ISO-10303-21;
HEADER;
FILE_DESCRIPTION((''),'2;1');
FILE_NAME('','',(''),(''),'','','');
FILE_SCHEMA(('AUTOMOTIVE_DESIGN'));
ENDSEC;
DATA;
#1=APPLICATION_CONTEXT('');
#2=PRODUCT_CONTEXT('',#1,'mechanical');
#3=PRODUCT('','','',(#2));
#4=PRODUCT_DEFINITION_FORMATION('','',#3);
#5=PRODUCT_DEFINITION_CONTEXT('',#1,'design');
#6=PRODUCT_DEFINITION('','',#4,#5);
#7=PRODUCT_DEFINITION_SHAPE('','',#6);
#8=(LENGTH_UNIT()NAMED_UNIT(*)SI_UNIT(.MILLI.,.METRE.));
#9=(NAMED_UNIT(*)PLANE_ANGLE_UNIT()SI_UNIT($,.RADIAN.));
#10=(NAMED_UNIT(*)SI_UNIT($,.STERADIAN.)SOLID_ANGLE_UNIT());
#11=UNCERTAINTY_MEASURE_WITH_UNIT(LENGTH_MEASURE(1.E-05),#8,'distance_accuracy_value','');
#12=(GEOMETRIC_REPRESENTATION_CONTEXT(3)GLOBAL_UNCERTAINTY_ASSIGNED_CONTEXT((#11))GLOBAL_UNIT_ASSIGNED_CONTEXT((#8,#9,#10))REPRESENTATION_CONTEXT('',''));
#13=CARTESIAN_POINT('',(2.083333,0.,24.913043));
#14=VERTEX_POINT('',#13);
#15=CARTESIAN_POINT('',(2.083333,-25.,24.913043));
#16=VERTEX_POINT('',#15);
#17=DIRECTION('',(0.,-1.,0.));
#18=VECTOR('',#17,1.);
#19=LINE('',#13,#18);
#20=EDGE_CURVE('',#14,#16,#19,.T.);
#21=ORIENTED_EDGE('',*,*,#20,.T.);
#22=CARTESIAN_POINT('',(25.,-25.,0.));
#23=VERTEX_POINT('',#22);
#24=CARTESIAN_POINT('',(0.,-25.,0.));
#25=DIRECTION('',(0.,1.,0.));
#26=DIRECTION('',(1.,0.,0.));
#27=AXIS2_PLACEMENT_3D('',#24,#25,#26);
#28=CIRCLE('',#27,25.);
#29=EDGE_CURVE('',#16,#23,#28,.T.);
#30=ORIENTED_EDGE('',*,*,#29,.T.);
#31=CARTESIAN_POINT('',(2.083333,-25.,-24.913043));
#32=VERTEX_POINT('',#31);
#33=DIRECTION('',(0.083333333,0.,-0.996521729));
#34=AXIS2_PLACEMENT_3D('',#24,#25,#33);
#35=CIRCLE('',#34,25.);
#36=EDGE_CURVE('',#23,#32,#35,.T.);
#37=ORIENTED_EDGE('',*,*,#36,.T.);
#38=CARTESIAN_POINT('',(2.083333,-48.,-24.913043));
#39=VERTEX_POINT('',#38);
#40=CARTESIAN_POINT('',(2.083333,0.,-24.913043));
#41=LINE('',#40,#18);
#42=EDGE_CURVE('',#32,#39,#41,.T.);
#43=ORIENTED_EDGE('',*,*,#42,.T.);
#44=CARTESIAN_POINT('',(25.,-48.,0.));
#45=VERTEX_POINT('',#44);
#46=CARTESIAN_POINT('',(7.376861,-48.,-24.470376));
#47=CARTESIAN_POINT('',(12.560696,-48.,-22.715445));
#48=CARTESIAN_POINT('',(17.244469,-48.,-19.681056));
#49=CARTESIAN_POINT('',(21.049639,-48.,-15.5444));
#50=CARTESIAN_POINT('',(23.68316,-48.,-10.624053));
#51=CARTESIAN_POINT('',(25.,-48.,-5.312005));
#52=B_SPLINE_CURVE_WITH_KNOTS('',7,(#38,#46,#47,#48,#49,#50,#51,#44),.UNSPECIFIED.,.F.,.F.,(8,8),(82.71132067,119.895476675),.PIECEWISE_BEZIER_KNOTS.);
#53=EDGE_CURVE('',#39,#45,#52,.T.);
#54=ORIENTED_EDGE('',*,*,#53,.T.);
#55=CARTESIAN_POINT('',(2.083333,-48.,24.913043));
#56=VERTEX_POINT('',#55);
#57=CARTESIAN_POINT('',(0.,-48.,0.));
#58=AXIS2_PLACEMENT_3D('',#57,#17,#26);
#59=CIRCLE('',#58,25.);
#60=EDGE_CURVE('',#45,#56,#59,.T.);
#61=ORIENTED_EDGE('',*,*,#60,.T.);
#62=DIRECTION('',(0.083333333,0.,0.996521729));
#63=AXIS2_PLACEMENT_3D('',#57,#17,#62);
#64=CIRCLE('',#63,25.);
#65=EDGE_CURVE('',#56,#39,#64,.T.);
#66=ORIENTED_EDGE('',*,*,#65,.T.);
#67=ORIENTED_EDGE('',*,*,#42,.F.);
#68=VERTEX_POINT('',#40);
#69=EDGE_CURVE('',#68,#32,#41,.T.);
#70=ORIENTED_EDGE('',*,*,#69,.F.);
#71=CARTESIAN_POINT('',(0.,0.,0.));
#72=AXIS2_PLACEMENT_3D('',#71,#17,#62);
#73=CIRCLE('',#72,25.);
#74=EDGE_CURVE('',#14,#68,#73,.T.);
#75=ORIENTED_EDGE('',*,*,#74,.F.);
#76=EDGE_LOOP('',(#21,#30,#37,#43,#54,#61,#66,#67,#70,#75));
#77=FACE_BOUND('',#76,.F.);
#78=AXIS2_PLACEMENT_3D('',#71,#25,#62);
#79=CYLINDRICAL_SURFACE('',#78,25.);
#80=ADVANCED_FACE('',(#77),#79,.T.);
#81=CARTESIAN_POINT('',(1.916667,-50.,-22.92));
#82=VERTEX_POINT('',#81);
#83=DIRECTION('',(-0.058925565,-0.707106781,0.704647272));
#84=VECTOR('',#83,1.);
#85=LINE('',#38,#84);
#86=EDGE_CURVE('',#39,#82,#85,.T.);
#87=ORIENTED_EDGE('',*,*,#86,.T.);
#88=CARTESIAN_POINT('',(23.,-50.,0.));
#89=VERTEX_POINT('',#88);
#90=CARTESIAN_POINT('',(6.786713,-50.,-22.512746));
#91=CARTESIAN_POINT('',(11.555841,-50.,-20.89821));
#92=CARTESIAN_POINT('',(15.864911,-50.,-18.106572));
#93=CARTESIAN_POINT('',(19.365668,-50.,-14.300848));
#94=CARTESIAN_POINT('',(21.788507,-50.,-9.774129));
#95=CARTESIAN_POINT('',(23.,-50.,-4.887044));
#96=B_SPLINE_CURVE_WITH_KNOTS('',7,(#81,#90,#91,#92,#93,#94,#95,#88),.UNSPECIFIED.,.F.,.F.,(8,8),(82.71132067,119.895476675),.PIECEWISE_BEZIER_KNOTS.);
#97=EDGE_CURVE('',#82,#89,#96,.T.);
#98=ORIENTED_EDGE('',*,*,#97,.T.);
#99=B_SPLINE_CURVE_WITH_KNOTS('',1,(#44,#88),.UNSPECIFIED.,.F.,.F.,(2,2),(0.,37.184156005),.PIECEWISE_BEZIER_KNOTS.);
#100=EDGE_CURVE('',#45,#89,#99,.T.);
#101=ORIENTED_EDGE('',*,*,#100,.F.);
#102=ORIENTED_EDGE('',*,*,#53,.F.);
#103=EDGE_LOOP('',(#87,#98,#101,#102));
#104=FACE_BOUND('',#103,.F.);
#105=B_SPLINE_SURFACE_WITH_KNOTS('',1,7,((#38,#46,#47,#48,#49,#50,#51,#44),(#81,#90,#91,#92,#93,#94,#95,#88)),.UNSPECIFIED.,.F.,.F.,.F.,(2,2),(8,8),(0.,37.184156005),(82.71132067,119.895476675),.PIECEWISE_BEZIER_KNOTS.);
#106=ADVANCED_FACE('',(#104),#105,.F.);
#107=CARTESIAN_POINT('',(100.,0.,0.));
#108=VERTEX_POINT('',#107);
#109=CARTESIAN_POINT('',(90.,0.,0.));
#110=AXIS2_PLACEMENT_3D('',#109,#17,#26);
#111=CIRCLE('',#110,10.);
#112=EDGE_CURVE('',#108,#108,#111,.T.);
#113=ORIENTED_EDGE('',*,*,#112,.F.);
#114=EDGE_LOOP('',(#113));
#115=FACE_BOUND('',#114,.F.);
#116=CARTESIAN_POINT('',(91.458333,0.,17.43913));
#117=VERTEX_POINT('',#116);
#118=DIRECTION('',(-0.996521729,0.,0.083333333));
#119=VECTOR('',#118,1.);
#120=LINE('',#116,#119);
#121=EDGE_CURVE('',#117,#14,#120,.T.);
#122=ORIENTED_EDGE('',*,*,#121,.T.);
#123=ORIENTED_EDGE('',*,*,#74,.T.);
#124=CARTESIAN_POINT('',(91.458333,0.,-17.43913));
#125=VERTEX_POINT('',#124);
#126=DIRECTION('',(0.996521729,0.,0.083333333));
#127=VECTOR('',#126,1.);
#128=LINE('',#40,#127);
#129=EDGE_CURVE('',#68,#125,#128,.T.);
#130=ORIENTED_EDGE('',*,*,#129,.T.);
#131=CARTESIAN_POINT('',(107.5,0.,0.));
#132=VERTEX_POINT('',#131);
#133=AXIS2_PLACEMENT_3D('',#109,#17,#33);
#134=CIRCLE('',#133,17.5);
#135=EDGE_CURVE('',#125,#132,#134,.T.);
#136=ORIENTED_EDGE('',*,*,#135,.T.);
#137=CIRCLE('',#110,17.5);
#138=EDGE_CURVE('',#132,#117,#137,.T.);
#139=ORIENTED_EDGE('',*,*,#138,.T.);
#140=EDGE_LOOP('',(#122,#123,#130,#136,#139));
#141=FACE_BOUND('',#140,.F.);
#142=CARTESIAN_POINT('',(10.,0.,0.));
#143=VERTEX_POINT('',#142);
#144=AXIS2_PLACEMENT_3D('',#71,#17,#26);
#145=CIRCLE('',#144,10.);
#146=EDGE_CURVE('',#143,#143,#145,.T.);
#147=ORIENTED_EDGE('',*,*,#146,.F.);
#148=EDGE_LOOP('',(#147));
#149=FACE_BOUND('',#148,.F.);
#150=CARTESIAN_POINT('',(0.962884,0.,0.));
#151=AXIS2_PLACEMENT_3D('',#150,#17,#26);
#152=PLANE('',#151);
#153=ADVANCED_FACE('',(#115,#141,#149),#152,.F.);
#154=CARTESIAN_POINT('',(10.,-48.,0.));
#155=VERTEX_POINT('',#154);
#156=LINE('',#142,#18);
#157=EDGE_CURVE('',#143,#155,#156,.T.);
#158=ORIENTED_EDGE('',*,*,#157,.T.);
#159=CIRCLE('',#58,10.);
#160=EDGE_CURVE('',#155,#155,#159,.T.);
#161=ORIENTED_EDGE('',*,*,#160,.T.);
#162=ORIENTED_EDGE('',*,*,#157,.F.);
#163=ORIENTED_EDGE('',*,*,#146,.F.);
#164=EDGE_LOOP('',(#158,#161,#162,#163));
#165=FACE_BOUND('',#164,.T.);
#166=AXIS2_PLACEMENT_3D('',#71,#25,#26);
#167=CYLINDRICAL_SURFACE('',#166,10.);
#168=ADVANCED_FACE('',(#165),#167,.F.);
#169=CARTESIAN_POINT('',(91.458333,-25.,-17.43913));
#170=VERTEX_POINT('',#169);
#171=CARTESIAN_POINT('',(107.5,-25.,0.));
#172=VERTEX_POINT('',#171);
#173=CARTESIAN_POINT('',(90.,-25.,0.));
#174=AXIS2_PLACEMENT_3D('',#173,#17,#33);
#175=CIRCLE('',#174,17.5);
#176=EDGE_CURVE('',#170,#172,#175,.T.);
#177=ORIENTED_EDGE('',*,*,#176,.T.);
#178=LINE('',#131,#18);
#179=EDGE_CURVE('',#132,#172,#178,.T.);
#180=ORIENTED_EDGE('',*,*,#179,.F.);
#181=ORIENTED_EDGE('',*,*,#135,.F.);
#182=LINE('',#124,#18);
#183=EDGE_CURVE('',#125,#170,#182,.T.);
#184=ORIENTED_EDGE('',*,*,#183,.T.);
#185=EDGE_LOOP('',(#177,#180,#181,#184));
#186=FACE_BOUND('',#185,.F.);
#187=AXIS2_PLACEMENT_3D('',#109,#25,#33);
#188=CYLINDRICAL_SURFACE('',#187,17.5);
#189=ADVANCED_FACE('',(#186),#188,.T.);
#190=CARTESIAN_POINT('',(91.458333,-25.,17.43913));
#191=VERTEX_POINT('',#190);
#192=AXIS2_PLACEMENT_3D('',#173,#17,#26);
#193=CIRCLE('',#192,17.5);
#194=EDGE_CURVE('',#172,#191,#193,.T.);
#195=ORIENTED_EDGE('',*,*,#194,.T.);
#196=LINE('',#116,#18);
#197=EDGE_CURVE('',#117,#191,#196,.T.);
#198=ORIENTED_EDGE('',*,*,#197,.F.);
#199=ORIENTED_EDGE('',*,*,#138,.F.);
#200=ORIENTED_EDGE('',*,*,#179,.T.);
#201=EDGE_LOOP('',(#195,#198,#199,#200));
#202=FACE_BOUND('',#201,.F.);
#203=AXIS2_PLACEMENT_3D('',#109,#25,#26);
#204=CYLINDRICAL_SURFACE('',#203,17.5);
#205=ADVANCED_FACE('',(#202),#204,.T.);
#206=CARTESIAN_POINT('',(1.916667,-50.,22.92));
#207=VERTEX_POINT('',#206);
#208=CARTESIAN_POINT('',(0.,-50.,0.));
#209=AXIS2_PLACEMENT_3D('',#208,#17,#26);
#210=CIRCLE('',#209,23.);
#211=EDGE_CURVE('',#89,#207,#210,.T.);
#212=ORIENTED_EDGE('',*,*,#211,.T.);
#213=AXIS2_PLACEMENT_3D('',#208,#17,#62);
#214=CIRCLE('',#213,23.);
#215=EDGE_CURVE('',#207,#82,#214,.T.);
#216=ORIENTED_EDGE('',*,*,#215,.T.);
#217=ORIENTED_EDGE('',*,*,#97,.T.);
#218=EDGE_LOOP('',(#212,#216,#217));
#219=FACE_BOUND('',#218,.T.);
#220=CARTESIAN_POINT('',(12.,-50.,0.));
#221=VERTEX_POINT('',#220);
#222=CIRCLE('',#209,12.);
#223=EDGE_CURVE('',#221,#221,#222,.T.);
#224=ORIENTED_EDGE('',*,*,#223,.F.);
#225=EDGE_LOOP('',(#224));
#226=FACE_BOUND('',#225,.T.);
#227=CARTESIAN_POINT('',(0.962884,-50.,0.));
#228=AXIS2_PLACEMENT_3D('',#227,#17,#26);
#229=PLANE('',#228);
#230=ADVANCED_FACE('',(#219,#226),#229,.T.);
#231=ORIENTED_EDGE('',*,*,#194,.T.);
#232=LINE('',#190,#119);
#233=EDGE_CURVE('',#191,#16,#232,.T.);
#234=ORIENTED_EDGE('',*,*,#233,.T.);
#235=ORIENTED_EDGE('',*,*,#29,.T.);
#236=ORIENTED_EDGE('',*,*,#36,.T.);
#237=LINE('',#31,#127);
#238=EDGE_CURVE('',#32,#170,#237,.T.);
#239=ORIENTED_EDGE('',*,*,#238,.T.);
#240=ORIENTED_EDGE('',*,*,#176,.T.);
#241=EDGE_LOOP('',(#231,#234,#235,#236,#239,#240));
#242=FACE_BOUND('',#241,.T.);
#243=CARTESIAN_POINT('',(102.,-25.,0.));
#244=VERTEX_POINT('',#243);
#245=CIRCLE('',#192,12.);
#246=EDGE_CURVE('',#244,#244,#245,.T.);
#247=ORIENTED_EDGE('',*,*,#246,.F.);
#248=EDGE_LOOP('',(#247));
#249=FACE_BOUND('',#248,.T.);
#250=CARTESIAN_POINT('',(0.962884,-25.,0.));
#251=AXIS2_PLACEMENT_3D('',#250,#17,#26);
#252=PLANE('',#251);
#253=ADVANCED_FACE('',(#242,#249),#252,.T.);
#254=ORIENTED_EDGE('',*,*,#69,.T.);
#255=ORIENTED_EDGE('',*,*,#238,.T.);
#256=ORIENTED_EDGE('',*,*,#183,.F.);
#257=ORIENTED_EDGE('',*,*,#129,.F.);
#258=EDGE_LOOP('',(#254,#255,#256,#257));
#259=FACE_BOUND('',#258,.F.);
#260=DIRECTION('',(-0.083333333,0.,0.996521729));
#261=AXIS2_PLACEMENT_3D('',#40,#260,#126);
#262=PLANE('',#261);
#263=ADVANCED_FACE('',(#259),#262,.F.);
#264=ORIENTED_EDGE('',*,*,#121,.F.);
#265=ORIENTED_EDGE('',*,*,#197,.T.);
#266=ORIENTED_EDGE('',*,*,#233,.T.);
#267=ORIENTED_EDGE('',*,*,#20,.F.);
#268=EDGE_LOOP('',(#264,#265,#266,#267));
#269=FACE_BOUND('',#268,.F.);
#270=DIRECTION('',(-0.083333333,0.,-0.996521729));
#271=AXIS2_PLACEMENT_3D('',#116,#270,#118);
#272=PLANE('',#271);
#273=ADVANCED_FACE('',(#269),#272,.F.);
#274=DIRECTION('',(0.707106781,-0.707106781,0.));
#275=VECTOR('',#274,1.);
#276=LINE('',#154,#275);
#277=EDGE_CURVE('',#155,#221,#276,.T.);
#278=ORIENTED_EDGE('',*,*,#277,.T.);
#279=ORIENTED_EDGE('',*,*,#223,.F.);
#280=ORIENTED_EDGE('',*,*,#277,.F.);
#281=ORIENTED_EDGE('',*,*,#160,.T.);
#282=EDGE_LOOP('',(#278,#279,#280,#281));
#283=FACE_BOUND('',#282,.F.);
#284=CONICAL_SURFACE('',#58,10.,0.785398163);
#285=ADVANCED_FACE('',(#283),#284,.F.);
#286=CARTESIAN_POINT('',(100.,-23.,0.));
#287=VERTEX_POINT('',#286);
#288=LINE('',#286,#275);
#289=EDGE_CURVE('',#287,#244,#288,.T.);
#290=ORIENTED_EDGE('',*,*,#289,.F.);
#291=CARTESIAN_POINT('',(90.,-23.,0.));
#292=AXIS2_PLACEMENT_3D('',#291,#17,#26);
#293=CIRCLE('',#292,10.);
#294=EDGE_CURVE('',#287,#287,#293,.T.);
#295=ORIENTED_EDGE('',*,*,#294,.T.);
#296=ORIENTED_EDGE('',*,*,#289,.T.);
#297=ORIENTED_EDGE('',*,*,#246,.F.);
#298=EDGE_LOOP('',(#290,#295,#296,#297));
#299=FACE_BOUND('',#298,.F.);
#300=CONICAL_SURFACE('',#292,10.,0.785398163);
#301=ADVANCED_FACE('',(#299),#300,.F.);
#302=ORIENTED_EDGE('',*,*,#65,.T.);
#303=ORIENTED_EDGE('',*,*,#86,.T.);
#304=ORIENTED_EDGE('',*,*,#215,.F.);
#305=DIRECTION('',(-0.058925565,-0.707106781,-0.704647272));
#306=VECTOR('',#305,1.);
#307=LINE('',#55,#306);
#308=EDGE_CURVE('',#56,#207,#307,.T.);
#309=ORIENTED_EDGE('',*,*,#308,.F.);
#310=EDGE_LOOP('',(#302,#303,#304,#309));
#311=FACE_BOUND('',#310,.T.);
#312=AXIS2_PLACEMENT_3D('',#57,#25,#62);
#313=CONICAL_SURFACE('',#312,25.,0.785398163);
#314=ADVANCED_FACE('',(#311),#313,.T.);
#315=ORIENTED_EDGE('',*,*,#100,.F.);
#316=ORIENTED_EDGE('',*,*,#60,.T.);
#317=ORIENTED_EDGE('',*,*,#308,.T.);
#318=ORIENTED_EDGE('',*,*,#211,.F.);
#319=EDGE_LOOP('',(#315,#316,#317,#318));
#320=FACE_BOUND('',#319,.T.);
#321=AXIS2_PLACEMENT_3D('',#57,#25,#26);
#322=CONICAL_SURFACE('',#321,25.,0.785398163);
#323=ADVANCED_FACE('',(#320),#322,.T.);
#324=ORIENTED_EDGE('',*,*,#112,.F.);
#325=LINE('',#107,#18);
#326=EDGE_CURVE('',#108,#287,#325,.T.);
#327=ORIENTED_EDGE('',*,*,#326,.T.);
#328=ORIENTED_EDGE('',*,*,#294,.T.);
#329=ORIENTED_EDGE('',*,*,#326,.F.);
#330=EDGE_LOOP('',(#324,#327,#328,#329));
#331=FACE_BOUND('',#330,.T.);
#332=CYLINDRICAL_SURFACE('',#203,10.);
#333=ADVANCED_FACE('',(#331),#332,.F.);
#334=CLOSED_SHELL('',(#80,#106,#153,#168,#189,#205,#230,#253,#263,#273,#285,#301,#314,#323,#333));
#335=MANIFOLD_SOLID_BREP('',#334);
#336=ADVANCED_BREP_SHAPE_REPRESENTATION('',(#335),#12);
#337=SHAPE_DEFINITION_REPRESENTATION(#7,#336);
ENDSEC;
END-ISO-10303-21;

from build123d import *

# Parameters (mm, degrees)
F0_R     = 10
F1_DEPTH = 25
F2_DEPTH = 50
F3_SIZE  = 2


# Not quite as in the source:
# - the program builds the solid bodies; features that only make, move or delete a surface that nothing else refers to are left out


with BuildPart() as f1:
    # F0 (on Front) → F1 (new body)
    with BuildSketch(Plane.XZ):
        with BuildLine():
            ThreePointArc((2.0833333333, -24.9130432148), (18.3995018048, -16.9250800097), (25, 0))
            ThreePointArc((25, 0), (18.3995018048, 16.9250800097), (2.0833333333, 24.9130432148))
            ThreePointArc((2.0833333333, 24.9130432148), (-25, 0), (2.0833333333, -24.9130432148))
        make_face()
        Circle(F0_R, mode=Mode.SUBTRACT)
        with BuildLine():
            ThreePointArc((2.0833333333, 24.9130432148), (18.3995018048, 16.9250800097), (25, 0))
            ThreePointArc((25, 0), (18.3995018048, -16.9250800097), (2.0833333333, -24.9130432148))
            Line((2.0833333333, -24.9130432148), (91.4583333333, -17.4391302504))
            ThreePointArc((91.4583333333, -17.4391302504), (72.5, 0), (91.4583333333, 17.4391302504))
            Line((91.4583333333, 17.4391302504), (2.0833333333, 24.9130432148))
        make_face()
        with BuildLine():
            ThreePointArc((107.5, 0), (102.8796512634, 11.8475560068), (91.4583333333, 17.4391302504))
            ThreePointArc((91.4583333333, 17.4391302504), (72.5, 0), (91.4583333333, -17.4391302504))
            ThreePointArc((91.4583333333, -17.4391302504), (102.8796512634, -11.8475560068), (107.5, 0))
        make_face()
        with Locations((90, 0)):
            Circle(F0_R, mode=Mode.SUBTRACT)
    extrude(amount=F1_DEPTH)

    # F0 (on Front) → F2 (join)
    with BuildSketch(Plane.XZ):
        with BuildLine():
            ThreePointArc((2.0833333333, -24.9130432148), (18.3995018048, -16.9250800097), (25, 0))
            ThreePointArc((25, 0), (18.3995018048, 16.9250800097), (2.0833333333, 24.9130432148))
            ThreePointArc((2.0833333333, 24.9130432148), (-25, 0), (2.0833333333, -24.9130432148))
        make_face()
        Circle(F0_R, mode=Mode.SUBTRACT)
    extrude(amount=F2_DEPTH)

    # F3
    f3_edges = [f1.edges().sort_by_distance(p)[0] for p in [
        (-2.083333, -50, 24.913043),
        (-10, -50, 0),
        (80, -25, 0),
    ]]
    chamfer(f3_edges, length=F3_SIZE)


solid = f1.part
